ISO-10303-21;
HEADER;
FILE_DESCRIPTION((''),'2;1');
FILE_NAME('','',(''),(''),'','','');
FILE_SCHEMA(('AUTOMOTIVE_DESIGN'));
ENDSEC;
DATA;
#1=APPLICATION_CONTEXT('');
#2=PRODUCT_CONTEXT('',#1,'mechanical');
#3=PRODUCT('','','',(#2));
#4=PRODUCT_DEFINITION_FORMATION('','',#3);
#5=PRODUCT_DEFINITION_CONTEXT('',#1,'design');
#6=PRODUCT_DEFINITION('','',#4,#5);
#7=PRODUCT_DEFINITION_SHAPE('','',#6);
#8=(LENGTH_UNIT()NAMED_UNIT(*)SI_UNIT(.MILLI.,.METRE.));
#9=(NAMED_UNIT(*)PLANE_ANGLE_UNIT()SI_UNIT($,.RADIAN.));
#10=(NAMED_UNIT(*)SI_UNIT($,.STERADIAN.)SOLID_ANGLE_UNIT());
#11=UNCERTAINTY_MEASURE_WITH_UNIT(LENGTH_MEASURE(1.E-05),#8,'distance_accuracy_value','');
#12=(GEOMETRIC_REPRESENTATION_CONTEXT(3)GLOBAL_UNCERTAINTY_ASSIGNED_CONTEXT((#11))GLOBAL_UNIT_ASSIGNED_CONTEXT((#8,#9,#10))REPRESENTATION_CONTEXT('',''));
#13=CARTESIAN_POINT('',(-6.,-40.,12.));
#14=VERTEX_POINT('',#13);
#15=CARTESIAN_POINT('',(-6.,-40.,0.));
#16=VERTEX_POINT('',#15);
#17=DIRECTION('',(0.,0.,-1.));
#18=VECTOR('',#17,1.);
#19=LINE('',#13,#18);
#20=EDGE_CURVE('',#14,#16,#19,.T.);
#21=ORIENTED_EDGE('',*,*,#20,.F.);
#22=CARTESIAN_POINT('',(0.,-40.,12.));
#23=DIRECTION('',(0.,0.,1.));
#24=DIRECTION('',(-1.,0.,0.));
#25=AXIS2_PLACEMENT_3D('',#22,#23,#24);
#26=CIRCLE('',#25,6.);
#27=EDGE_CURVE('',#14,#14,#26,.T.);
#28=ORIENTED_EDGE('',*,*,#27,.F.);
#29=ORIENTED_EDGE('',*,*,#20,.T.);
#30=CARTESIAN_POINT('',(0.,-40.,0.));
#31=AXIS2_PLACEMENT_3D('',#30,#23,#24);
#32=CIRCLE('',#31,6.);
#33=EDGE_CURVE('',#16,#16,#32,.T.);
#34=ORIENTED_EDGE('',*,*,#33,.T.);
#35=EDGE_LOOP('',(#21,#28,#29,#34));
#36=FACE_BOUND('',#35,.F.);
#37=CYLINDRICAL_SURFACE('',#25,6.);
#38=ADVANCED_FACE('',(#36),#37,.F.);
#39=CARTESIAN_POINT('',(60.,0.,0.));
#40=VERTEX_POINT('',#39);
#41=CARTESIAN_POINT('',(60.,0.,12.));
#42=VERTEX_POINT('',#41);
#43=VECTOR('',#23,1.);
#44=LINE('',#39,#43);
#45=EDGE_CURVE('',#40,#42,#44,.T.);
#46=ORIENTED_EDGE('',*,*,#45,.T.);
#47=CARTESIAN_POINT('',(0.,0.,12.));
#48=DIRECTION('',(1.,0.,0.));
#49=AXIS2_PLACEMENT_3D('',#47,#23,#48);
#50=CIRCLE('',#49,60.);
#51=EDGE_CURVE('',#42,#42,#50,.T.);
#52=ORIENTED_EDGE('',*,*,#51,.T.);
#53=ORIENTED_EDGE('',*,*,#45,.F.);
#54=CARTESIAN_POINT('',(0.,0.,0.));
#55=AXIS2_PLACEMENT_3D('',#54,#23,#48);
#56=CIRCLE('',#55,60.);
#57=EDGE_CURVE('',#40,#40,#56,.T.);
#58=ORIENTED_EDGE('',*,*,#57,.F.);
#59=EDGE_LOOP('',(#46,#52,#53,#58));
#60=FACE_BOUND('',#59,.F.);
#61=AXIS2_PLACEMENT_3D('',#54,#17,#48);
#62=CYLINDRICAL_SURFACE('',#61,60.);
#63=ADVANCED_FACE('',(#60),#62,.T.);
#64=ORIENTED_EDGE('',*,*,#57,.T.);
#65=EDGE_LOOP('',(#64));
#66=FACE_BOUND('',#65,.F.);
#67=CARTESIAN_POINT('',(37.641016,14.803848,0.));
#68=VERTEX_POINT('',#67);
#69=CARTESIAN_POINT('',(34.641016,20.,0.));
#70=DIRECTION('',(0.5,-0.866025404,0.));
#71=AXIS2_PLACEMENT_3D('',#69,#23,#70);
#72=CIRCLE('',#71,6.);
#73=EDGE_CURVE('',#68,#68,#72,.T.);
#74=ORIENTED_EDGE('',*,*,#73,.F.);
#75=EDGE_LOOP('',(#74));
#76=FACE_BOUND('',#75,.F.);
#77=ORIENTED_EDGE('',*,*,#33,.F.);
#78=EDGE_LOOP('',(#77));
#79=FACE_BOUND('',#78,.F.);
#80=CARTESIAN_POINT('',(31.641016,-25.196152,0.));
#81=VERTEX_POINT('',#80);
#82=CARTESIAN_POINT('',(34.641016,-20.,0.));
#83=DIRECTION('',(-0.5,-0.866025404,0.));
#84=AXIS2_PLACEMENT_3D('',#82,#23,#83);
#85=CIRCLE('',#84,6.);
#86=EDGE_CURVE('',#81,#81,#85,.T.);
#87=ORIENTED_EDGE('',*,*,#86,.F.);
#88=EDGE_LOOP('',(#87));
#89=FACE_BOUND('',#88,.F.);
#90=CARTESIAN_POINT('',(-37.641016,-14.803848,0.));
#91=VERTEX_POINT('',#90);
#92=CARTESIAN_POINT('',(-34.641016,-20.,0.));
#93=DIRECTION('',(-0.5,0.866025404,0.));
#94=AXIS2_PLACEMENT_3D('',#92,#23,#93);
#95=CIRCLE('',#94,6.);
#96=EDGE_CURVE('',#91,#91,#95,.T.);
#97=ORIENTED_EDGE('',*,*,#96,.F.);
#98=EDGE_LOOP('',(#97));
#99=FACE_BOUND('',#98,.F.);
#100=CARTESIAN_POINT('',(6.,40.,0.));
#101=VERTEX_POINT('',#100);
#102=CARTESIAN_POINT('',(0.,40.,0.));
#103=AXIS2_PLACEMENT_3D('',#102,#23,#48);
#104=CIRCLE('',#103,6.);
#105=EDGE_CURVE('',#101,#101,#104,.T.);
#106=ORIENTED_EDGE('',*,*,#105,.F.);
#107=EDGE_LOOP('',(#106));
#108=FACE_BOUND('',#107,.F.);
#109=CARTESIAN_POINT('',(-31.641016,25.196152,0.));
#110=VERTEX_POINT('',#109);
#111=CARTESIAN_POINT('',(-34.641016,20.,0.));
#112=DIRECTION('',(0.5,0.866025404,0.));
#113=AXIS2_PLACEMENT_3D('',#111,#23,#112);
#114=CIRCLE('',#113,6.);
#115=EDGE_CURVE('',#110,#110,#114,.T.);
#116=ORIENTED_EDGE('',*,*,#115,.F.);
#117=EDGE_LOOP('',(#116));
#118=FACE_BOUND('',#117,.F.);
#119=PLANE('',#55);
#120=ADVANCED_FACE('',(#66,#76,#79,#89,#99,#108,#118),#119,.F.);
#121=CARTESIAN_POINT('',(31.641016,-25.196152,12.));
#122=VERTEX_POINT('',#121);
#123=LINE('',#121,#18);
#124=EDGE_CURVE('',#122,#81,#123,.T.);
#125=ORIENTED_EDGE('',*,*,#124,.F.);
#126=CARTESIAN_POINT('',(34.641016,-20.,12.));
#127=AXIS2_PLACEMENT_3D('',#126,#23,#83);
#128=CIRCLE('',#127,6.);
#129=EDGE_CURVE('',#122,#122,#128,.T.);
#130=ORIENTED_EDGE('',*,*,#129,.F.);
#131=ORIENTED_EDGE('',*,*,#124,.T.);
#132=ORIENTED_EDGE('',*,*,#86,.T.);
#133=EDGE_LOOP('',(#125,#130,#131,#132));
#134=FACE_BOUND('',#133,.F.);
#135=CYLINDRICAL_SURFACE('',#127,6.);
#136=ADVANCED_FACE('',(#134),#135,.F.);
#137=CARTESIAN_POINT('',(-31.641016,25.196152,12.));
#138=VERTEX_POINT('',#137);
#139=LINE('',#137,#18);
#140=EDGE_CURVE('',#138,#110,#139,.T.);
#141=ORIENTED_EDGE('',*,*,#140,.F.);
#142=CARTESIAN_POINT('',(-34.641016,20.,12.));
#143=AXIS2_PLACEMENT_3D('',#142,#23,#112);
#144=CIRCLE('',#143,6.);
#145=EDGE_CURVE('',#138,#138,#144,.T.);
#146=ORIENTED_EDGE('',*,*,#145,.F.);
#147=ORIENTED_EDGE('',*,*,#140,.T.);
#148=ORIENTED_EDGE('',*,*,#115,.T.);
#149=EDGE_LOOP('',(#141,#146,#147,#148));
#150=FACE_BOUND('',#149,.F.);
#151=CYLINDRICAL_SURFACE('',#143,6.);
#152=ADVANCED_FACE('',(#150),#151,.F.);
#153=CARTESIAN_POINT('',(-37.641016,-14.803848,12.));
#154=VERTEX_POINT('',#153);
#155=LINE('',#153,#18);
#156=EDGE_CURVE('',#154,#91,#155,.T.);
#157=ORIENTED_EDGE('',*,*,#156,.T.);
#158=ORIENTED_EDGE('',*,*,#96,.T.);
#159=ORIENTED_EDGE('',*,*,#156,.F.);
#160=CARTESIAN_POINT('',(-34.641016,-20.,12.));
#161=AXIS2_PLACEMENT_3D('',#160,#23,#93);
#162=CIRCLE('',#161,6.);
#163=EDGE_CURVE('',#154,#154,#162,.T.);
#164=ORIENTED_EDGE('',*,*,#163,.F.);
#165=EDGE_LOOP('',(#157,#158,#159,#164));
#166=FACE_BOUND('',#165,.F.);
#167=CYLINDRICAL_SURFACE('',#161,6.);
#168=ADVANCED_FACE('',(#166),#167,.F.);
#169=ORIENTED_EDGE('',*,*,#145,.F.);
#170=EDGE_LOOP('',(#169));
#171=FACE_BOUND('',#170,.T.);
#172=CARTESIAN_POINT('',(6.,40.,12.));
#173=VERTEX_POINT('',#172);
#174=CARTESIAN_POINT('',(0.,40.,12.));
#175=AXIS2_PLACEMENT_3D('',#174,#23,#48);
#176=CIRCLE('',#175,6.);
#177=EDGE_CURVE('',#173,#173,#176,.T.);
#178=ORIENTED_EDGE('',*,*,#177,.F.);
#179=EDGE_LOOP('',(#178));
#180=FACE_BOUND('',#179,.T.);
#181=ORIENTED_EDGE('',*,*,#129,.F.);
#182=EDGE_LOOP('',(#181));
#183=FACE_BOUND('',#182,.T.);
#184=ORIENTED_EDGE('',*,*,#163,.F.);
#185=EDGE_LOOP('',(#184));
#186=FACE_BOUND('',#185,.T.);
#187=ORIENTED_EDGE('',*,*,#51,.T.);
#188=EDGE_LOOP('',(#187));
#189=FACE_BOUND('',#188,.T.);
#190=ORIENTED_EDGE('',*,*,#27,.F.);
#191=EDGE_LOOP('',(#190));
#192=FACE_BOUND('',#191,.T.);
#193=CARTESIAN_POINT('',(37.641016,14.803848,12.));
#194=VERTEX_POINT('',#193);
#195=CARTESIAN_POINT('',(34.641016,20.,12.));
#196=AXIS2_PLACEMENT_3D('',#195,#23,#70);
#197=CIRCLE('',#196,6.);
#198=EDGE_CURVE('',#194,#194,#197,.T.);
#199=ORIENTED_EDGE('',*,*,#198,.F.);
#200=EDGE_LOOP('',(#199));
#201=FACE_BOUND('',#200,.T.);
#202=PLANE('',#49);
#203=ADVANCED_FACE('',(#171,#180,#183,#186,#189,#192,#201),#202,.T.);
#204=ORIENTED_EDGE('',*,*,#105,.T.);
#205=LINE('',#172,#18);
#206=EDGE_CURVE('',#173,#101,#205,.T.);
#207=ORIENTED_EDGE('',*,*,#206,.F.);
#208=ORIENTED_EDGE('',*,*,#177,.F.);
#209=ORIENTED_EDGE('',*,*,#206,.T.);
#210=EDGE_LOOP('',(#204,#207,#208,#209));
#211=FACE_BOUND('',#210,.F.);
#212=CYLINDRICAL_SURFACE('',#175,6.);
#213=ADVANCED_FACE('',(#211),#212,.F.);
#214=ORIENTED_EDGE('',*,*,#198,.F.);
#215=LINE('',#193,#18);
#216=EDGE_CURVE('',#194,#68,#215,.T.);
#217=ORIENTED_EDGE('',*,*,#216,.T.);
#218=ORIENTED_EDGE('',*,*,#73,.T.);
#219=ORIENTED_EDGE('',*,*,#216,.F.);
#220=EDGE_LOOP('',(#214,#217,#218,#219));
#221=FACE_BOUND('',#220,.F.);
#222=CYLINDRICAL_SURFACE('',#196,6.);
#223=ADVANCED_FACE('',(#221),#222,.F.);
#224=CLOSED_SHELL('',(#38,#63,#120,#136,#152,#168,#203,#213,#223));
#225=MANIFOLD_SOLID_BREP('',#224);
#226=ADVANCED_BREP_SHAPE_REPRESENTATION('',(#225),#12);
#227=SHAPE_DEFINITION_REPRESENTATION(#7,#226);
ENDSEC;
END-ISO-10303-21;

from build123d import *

# Parameters (mm, degrees)
F0_R            = 60
F1_DEPTH        = 12
F2_R            = 6
F3_DEPTH        = 12.001
F3_COPIES_COUNT = 6


# Not quite as in the source:
# - a pattern or mirror of a feature is missing from the dataset's text; its kind, count and spacing are read off the source's solid


with BuildPart() as f1:
    # F0 (on Top) → F1 (new body)
    with BuildSketch(Plane.XY):
        Circle(F0_R)
    extrude(amount=F1_DEPTH)

    # F2 (on face) → F3 (cut, through all)
    with BuildSketch(Plane.XY.offset(12)):
        with Locations((0, 40)):
            Circle(F2_R)
    f3 = extrude(amount=-F3_DEPTH, mode=Mode.SUBTRACT)

    # F3_copies: F3 ×6 about axis
    f3_copies_axis = Axis((0, 0, 0), (0, 0, 1))
    for i in range(1, F3_COPIES_COUNT):
        add(f3.rotate(f3_copies_axis, i * 360 / F3_COPIES_COUNT), mode=Mode.SUBTRACT)


solid = f1.part
